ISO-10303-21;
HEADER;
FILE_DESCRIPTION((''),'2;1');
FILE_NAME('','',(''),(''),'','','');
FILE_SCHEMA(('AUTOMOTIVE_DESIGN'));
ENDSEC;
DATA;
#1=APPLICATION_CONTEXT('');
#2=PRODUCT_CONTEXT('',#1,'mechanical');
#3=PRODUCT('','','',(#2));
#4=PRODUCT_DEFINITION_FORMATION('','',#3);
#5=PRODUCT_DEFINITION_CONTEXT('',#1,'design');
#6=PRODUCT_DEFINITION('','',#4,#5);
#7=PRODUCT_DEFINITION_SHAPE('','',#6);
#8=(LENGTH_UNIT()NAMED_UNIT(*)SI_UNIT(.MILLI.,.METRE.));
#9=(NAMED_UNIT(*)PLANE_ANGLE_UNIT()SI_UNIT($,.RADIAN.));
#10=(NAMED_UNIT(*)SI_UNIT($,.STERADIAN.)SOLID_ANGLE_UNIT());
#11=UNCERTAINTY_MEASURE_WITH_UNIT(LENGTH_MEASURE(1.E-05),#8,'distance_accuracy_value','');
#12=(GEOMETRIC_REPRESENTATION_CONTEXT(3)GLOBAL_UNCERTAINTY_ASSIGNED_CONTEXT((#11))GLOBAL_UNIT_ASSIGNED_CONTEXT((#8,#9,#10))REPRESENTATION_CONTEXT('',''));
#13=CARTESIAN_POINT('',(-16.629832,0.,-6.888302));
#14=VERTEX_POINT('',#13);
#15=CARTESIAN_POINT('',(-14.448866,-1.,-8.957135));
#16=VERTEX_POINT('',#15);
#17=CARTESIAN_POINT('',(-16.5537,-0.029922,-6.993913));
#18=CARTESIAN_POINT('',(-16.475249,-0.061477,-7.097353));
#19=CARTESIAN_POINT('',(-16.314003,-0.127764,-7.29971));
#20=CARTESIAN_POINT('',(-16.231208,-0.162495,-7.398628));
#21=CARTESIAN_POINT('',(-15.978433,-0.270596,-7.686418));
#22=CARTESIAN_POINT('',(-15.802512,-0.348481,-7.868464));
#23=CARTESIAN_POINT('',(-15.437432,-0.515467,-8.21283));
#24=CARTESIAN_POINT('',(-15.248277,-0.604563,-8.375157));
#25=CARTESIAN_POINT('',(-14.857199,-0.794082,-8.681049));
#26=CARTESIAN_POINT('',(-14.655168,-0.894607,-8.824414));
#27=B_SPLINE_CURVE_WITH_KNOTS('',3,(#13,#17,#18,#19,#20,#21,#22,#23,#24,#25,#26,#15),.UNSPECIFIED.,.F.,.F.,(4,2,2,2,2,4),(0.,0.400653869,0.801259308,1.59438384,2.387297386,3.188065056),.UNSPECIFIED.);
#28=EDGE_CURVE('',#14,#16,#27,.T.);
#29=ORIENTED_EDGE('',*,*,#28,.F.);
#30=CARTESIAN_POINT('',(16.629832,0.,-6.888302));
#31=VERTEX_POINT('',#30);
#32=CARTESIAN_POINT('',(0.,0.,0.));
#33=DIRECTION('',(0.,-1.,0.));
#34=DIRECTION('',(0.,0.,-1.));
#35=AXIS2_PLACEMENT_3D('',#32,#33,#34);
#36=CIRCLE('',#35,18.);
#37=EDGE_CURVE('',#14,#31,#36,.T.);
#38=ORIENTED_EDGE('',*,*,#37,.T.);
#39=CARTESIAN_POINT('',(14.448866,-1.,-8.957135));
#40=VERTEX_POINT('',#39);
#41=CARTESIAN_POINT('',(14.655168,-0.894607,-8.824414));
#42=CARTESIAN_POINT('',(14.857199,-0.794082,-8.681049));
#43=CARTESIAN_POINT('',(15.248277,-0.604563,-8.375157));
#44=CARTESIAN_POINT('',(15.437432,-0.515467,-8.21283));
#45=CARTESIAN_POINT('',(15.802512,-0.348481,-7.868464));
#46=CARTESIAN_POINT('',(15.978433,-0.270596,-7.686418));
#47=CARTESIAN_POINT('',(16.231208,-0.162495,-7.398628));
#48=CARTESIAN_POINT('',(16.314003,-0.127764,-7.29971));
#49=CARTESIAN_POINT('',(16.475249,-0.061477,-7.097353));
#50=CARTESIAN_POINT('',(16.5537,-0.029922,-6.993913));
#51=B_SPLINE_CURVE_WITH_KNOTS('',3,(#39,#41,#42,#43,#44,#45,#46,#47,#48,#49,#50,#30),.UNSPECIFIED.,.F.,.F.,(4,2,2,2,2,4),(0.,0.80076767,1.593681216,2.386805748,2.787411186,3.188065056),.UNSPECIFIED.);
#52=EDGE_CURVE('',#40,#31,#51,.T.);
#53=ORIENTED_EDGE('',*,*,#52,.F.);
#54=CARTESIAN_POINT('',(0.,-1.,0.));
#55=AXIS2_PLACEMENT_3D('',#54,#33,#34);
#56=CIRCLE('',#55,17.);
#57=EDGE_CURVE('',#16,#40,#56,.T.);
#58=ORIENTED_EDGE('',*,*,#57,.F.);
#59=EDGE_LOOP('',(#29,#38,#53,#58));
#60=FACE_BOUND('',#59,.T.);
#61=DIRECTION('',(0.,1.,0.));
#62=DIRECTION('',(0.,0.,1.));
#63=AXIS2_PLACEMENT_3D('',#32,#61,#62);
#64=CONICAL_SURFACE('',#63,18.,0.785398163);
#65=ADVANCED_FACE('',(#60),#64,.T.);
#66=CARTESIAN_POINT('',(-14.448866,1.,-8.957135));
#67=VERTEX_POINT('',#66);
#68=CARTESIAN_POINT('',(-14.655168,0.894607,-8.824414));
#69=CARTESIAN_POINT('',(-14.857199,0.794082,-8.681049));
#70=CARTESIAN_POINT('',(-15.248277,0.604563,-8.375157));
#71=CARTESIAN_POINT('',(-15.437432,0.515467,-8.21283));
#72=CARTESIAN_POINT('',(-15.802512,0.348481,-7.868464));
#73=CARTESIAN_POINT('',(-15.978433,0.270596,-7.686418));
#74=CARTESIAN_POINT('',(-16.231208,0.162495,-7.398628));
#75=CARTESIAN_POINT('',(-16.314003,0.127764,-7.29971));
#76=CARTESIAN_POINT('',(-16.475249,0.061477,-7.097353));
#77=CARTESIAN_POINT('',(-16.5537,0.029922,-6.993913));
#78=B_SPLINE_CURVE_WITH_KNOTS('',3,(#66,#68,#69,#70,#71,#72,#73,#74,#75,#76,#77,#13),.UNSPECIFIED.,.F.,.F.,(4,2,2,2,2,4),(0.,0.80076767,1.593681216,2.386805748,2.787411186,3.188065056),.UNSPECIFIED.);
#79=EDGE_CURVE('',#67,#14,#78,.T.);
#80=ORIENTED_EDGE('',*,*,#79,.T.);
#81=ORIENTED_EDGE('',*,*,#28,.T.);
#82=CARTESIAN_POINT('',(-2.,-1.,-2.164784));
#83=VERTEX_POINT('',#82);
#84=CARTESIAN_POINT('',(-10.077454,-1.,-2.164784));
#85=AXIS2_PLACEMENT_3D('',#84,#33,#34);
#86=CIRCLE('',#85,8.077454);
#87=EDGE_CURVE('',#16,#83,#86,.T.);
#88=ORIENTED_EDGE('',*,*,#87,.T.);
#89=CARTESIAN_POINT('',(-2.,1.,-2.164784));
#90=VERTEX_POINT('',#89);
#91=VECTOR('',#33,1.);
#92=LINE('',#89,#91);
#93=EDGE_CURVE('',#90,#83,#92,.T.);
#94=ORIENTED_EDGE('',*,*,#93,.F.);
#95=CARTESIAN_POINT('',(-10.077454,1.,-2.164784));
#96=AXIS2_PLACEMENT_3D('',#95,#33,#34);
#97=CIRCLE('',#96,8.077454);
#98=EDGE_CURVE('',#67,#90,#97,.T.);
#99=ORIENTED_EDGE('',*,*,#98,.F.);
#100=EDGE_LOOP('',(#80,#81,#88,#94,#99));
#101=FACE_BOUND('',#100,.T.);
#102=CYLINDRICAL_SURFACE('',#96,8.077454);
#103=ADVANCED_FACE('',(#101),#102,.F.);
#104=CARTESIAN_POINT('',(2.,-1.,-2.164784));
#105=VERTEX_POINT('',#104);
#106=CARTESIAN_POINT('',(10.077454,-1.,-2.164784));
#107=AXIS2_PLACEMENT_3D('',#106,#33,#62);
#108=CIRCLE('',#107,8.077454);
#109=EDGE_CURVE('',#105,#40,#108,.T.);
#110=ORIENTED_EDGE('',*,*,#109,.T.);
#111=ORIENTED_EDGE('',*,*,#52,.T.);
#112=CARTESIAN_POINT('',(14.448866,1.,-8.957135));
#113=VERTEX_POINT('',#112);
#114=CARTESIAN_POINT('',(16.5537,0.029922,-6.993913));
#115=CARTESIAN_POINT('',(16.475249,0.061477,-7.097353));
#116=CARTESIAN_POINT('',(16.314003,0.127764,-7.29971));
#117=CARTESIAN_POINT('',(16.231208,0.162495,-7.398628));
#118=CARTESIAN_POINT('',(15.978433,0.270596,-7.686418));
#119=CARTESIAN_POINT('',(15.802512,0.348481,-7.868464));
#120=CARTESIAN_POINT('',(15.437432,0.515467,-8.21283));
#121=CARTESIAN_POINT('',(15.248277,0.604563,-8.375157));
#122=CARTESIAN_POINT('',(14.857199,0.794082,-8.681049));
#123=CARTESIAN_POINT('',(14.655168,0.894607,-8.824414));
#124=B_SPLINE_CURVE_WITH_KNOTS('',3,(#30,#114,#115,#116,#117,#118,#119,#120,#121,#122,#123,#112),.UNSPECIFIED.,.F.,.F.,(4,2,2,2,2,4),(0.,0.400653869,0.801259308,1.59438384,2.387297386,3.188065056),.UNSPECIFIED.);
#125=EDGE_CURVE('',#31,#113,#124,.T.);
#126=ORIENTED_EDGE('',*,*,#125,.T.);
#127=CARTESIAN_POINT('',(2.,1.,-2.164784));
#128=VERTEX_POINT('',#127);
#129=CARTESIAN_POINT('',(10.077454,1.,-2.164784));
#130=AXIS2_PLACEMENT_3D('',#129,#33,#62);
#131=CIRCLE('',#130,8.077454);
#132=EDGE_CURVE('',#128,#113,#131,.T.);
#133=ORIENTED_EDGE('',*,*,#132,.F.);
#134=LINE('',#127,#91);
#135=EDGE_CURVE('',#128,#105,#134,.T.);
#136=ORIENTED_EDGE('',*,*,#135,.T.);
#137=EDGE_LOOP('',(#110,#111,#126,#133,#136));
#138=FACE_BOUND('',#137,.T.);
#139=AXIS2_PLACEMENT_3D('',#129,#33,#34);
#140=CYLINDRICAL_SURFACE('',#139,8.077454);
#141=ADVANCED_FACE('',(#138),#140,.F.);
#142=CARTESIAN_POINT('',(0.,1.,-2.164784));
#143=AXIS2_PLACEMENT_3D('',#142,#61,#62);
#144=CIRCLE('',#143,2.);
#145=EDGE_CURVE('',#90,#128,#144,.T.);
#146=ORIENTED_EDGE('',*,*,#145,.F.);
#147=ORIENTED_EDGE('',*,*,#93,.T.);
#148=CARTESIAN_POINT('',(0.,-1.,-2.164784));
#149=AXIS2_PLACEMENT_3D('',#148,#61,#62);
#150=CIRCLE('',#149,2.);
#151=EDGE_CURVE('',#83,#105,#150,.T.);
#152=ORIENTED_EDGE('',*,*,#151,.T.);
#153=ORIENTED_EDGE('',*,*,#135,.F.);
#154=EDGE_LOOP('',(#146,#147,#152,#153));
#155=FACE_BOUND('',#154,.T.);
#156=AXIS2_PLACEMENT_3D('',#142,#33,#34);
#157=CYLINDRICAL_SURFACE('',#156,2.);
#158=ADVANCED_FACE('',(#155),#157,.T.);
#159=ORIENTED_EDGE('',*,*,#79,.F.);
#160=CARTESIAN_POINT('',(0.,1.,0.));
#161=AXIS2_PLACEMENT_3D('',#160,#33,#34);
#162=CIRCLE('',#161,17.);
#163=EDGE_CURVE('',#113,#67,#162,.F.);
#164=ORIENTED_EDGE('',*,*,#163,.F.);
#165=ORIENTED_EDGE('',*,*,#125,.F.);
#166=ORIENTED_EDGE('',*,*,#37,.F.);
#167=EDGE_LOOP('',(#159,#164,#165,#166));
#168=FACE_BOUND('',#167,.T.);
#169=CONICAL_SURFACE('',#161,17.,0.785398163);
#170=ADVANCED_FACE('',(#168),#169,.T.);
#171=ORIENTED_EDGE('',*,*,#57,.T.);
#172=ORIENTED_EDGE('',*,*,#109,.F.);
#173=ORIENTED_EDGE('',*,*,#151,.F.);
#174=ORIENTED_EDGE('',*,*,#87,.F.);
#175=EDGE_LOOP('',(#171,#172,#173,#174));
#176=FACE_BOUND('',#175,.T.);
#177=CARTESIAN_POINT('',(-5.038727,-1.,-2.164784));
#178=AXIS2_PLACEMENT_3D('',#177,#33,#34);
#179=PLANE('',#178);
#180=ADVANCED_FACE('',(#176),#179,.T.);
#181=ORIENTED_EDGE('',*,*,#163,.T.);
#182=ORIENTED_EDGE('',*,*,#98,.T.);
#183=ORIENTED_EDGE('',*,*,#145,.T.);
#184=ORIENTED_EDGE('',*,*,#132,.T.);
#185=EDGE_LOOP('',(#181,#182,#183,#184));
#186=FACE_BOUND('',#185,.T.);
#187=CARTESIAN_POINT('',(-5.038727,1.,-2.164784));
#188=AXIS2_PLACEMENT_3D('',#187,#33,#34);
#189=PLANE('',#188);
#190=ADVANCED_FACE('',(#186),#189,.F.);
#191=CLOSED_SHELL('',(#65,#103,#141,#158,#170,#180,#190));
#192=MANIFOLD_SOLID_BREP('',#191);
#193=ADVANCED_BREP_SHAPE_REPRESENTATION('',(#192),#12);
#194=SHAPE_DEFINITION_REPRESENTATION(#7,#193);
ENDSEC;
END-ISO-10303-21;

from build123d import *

# Parameters (mm, degrees)
BOSS_EXTRUDE1_DEPTH = 1
CHAMFER1_SIZE       = 1


with BuildPart() as part:
    # Sketch1 → Boss-Extrude1 (new, symmetric)
    with BuildSketch(Plane(origin=(0, 0, 0), x_dir=(1, 0, 0), z_dir=(0, 1, 0))):
        with BuildLine():
            ThreePointArc((16.629831585, 6.888301783), (0, 18), (-16.629831585, 6.888301783))
            ThreePointArc((-16.629831585, 6.888301783), (-7.595646594, 9.851519544), (-2, 2.164784401))
            ThreePointArc((-2, 2.164784401), (0, 0.164784401), (2, 2.164784401))
            ThreePointArc((2, 2.164784401), (7.595646594, 9.851519544), (16.629831585, 6.888301783))
        make_face()
    extrude(amount=BOSS_EXTRUDE1_DEPTH, both=True)

    # Chamfer1
    chamfer1_edges = [part.edges().sort_by_distance(p)[0] for p in [
        (0, -1, -18),
        (0, 1, -18),
    ]]
    chamfer(chamfer1_edges, length=CHAMFER1_SIZE - 0.0001)  # a hair under: the kernel refuses the full size


solid = part.part
